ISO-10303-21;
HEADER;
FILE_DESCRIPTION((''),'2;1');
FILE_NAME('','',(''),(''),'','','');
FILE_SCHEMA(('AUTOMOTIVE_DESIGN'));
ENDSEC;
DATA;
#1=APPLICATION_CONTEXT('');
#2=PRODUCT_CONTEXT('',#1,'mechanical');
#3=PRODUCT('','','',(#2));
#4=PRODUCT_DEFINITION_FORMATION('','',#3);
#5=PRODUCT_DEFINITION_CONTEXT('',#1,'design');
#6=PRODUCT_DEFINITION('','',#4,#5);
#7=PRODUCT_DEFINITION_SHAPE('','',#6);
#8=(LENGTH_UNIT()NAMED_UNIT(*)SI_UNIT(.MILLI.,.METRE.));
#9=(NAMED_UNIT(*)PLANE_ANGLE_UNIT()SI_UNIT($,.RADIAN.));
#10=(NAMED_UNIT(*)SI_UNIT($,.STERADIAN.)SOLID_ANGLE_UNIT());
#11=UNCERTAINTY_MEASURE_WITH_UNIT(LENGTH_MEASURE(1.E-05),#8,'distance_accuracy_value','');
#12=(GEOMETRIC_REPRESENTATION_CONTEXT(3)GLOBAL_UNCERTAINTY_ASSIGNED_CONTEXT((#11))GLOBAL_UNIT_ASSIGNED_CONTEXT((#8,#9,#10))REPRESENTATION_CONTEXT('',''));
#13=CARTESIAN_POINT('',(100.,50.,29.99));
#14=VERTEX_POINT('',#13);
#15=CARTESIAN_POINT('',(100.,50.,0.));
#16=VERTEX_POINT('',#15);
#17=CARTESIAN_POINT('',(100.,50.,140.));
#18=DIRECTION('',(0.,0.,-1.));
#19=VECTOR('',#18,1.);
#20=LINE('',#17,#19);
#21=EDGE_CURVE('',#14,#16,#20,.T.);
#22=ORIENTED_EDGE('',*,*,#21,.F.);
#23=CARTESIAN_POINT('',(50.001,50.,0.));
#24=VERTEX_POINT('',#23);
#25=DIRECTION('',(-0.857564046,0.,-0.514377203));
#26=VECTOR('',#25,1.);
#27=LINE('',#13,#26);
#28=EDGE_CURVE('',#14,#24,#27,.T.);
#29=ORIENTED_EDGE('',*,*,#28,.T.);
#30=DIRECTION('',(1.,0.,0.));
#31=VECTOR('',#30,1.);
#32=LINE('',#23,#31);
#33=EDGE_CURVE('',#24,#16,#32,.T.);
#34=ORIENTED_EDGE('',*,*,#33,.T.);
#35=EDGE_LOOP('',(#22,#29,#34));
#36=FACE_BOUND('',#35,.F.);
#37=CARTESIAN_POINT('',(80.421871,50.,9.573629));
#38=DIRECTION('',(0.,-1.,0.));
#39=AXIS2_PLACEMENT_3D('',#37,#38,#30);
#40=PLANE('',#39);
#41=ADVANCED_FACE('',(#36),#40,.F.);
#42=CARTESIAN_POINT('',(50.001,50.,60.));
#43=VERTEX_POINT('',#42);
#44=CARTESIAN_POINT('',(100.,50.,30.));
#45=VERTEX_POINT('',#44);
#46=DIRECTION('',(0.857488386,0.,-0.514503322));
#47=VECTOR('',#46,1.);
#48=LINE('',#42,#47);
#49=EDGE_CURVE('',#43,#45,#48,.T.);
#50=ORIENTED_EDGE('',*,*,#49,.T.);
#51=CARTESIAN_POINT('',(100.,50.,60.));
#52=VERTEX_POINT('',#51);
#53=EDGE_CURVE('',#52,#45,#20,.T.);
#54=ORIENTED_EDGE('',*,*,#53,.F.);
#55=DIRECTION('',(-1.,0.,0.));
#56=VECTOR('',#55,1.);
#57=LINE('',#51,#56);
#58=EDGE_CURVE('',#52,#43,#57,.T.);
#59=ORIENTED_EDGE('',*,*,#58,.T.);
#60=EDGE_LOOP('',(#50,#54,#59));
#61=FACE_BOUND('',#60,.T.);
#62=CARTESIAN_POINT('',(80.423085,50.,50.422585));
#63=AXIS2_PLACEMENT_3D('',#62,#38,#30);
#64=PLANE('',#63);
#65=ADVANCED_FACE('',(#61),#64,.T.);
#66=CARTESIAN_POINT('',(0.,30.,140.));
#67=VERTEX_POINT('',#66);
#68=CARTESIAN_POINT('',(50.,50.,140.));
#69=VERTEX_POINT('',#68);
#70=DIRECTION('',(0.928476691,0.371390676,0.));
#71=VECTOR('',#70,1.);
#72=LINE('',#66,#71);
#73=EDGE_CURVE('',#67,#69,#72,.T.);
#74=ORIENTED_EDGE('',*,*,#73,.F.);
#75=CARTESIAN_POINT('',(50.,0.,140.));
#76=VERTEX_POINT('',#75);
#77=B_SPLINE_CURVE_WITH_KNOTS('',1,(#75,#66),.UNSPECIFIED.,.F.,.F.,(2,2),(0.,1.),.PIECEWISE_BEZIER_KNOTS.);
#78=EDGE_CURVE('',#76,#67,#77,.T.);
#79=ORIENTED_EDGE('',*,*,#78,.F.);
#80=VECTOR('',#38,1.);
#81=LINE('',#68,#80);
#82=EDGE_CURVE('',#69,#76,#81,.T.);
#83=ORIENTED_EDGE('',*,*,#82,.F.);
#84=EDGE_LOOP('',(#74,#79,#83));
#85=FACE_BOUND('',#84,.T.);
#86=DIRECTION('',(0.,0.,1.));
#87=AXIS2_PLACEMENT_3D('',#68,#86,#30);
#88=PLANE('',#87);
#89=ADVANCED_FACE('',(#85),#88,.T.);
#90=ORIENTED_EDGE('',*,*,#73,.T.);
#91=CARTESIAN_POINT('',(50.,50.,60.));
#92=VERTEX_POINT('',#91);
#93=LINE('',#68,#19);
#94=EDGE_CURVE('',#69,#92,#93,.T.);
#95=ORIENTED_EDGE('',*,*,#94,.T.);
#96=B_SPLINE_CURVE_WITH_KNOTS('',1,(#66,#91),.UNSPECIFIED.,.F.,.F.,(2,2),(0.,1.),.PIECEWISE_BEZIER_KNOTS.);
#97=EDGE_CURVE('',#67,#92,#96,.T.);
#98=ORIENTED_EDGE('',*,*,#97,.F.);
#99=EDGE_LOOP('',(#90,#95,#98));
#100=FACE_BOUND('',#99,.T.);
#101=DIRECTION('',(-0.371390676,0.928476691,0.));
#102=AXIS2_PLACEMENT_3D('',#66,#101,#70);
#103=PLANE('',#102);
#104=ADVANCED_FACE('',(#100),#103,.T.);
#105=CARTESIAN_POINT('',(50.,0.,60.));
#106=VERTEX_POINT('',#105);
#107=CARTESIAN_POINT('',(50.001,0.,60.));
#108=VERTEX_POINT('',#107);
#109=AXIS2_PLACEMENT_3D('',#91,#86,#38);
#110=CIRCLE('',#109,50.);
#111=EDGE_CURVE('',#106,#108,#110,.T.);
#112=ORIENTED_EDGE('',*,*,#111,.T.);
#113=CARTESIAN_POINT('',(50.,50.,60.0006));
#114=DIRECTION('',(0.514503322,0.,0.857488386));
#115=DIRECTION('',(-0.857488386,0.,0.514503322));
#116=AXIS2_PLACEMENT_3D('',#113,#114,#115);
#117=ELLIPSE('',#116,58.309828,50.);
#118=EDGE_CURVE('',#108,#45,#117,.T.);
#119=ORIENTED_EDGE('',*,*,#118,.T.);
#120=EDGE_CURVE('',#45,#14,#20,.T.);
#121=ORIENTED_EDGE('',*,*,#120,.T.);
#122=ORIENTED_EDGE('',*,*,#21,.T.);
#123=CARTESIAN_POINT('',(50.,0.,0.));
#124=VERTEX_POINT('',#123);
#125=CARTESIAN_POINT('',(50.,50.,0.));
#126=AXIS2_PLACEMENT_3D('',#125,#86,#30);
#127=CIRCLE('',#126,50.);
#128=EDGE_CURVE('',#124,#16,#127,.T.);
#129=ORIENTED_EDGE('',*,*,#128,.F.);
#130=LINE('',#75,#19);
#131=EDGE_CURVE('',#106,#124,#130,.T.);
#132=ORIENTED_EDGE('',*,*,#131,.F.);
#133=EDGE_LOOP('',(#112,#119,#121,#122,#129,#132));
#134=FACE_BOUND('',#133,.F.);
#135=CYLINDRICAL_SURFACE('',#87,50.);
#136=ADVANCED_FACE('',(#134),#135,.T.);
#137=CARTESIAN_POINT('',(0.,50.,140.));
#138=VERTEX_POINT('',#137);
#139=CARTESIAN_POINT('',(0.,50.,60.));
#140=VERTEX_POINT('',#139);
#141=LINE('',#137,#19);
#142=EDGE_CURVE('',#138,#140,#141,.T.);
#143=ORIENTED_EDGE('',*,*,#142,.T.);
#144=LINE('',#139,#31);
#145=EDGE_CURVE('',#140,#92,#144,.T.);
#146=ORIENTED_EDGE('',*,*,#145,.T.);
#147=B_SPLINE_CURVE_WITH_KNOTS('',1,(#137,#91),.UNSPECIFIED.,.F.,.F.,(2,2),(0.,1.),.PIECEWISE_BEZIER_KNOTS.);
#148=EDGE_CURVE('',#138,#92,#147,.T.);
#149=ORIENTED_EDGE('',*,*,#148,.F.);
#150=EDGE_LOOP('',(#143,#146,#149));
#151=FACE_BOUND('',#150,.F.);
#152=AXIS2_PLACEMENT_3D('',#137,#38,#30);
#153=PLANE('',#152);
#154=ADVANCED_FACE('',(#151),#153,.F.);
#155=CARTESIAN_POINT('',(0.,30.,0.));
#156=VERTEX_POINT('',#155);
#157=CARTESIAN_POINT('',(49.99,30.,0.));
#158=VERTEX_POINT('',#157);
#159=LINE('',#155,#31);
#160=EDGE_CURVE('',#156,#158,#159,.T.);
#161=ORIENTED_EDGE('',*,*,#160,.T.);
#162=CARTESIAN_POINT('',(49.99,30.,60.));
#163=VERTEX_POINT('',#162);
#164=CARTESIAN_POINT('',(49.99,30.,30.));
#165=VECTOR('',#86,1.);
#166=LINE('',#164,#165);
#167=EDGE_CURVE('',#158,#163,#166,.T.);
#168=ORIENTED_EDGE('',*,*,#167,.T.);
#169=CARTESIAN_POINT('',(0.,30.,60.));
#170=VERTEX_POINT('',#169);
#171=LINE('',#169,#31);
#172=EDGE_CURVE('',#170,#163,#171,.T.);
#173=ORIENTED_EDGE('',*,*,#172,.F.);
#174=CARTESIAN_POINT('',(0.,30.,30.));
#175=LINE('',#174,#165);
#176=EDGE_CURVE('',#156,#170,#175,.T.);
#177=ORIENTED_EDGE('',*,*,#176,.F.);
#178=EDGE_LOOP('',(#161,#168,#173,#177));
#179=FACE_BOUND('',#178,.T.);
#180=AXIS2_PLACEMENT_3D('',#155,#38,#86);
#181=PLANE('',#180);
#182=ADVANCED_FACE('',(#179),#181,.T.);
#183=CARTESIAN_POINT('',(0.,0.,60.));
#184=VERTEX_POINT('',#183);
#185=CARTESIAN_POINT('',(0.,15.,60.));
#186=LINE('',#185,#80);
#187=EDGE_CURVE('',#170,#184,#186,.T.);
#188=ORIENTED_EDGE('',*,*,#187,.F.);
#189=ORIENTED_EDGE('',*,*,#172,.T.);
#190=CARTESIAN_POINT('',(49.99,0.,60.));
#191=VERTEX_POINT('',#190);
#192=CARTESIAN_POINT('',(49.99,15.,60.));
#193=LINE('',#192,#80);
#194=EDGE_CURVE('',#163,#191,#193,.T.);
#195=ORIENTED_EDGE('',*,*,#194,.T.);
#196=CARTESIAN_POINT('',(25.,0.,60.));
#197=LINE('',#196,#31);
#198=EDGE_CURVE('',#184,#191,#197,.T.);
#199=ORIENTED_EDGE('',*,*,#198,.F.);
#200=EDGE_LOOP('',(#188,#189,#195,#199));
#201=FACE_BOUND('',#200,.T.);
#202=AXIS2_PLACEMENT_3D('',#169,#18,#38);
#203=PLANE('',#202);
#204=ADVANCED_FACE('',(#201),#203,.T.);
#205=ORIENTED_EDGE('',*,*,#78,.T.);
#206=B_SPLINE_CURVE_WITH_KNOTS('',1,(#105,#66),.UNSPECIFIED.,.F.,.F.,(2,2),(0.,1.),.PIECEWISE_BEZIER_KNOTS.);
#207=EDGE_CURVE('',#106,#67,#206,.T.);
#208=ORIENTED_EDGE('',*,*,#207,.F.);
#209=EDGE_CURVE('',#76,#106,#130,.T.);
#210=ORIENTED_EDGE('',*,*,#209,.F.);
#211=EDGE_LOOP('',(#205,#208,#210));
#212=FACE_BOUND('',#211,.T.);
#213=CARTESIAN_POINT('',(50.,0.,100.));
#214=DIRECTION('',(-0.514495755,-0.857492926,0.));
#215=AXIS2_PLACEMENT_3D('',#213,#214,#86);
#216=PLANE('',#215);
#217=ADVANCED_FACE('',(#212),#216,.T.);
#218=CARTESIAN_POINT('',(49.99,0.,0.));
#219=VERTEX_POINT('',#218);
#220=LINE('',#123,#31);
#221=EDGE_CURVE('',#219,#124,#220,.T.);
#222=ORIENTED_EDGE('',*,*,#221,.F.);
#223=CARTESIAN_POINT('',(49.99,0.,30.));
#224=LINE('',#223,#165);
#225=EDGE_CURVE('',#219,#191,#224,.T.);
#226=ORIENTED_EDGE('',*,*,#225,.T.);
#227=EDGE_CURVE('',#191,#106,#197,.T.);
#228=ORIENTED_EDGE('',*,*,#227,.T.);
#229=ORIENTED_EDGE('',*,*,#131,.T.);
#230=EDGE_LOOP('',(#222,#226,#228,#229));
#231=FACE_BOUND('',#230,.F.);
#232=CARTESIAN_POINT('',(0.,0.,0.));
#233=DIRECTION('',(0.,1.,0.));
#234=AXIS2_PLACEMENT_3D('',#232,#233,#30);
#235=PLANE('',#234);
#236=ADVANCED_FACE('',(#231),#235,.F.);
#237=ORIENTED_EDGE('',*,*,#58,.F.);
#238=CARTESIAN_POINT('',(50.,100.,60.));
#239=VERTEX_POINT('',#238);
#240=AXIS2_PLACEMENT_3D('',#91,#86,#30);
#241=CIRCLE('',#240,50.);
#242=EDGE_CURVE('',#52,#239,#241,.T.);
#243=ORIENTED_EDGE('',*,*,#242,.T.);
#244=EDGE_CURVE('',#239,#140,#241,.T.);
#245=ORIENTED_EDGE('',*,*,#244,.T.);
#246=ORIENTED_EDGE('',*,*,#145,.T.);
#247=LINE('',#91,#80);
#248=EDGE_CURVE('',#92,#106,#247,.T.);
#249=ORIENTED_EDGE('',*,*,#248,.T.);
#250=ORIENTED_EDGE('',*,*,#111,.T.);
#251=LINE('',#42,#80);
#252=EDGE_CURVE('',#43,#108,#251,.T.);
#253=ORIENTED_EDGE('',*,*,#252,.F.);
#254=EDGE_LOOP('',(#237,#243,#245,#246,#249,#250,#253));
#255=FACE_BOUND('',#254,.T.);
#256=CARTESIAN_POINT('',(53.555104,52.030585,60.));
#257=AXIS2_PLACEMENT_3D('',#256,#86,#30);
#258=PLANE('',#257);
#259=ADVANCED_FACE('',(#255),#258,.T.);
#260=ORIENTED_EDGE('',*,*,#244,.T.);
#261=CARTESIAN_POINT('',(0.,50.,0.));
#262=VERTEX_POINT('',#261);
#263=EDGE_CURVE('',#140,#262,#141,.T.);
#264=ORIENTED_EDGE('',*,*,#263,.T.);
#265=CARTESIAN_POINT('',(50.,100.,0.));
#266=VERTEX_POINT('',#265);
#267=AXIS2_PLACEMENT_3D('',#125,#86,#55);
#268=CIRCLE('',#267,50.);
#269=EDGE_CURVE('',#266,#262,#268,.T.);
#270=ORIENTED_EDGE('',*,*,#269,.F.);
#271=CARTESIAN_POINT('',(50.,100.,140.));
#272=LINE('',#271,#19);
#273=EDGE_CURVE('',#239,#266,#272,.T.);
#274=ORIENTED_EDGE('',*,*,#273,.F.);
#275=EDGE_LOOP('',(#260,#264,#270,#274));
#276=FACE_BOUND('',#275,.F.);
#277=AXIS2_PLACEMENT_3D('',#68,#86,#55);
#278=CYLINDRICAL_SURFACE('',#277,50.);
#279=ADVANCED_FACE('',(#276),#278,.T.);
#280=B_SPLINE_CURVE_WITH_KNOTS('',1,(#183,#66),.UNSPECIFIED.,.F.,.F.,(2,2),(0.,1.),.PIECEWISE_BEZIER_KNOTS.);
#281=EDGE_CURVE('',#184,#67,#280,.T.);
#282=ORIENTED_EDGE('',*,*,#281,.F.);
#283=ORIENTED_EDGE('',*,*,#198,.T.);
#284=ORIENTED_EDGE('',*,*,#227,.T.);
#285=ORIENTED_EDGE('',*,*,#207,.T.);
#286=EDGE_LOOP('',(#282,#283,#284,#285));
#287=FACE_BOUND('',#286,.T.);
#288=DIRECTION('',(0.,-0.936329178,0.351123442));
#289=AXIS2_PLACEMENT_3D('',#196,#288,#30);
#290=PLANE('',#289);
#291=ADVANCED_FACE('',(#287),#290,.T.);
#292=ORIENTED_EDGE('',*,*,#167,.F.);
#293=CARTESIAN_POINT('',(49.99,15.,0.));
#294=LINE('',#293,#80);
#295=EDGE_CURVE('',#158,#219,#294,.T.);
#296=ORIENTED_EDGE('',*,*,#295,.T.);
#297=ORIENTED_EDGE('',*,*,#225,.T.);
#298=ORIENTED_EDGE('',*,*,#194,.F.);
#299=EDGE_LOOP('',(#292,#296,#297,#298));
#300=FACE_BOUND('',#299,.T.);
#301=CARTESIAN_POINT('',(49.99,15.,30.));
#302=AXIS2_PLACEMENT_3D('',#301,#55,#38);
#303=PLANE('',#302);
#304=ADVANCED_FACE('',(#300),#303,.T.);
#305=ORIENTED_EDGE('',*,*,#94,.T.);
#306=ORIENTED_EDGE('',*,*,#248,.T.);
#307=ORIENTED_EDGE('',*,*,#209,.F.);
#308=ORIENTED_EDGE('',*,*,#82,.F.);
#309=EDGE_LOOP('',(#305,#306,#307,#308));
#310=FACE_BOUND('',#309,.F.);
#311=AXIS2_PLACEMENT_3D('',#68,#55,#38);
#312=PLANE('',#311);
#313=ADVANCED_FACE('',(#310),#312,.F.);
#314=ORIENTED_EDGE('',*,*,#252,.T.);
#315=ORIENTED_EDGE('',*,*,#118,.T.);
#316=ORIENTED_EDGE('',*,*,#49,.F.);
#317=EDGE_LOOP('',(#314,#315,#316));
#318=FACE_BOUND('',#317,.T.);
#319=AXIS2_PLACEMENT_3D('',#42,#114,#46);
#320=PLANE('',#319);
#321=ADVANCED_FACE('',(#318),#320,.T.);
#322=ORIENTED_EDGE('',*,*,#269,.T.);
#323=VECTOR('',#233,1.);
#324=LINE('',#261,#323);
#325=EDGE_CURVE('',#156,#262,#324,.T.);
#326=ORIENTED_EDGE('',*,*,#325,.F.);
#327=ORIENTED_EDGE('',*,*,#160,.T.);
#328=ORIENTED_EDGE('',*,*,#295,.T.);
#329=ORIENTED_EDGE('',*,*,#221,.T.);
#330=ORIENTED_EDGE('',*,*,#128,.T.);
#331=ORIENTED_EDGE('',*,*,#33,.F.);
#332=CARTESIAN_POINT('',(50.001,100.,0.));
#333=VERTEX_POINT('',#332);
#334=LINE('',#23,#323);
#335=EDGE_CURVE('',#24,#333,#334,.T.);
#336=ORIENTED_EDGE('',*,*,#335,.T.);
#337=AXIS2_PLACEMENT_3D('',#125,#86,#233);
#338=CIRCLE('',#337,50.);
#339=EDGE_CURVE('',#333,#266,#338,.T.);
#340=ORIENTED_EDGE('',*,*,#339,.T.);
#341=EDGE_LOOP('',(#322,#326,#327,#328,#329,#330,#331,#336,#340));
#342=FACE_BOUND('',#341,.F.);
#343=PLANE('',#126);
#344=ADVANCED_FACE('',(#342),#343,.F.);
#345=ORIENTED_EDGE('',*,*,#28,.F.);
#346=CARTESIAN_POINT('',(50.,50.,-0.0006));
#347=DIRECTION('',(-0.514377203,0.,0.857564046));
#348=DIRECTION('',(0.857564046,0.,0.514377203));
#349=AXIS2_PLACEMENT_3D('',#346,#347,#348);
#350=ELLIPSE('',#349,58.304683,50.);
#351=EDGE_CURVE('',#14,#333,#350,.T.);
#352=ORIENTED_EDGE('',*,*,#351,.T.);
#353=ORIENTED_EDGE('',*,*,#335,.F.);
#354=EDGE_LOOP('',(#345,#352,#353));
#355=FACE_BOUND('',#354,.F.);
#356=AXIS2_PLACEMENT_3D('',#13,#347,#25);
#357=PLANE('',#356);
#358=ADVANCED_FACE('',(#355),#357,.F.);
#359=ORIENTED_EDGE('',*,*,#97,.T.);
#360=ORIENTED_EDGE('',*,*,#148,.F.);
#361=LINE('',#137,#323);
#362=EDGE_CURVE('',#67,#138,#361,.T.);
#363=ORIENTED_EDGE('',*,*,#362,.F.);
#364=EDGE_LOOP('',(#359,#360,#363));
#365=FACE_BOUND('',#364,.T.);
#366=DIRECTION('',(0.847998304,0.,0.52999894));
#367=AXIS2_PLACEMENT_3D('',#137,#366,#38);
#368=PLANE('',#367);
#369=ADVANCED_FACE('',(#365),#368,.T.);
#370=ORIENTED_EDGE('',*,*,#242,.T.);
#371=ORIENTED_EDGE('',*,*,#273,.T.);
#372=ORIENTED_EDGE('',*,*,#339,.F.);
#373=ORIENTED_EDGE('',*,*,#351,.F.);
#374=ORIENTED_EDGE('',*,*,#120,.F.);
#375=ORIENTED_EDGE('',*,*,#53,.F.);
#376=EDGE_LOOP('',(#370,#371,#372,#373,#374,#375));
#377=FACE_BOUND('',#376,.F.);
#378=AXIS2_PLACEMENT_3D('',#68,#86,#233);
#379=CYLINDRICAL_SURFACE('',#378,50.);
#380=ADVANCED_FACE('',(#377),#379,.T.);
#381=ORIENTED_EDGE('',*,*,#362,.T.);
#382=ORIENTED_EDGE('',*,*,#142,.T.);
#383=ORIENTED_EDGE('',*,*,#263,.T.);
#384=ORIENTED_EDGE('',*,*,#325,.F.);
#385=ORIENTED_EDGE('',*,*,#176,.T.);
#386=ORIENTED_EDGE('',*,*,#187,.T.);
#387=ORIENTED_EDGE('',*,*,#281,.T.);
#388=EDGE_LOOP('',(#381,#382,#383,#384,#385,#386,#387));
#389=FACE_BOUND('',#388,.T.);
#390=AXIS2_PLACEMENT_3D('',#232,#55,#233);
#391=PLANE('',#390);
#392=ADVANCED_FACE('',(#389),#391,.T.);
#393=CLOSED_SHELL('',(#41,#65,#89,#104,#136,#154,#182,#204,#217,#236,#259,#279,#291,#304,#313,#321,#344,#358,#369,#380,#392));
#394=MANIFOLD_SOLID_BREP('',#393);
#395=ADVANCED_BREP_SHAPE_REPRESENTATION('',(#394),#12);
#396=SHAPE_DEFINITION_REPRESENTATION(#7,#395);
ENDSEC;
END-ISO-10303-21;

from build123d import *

# Parameters (mm, degrees)
F0_W      = 100
F0_H      = 100
F1_DEPTH  = 140
F3_DEPTH  = 140.001
F5_DEPTH  = 80
F9_DEPTH  = 50.00099999
F11_DEPTH = 50.00099999
F6_W      = 50
F6_H      = 80
F14_W     = 30
F14_H     = 60
F16_DEPTH = 49.99


with BuildPart() as f1:
    # F0 (on Top) → F1 (new body)
    with BuildSketch(Plane.XY):
        with Locations((50, 50)):
            Rectangle(F0_W, F0_H)
    extrude(amount=F1_DEPTH)

    # F2 (on face) → F3 (cut, through all)
    with BuildSketch(Plane.XY.offset(140)):
        with BuildLine():
            ThreePointArc((0, 50), (14.6446609407, 85.3553390593), (50, 100))
            Line((50, 100), (0, 100))
            Line((0, 100), (0, 50))
        make_face()
        with BuildLine():
            ThreePointArc((50, 100), (85.3553390593, 85.3553390593), (100, 50))
            Line((100, 50), (100, 100))
            Line((100, 100), (50, 100))
        make_face()
        with BuildLine():
            Line((100, 0), (100, 50))
            ThreePointArc((100, 50), (85.3553390593, 14.6446609407), (50, 0))
            Line((50, 0), (100, 0))
        make_face()
    extrude(amount=-F3_DEPTH, mode=Mode.SUBTRACT)

    # F4 (on face) → F5 (cut)
    with BuildSketch(Plane.XY.offset(140)):
        with BuildLine():
            ThreePointArc((100, 50), (50, 100), (0, 50))
            Line((0, 50), (50, 50))
            Line((50, 50), (50, 0))
            ThreePointArc((50, 0), (85.3553390593, 14.6446609407), (100, 50))
        make_face()
    extrude(amount=-F5_DEPTH, mode=Mode.SUBTRACT)

    # F8 (on face) → F9 (cut, through all)
    with BuildSketch(Plane.XZ.offset(-50)):
        Polygon((100, 60), (50.001, 60), (100, 30), align=None)
    extrude(amount=F9_DEPTH, mode=Mode.SUBTRACT)

    # F10 (on face) → F11 (cut, through all)
    with BuildSketch(Plane.XZ.offset(-50)):
        Polygon((50.001, 0), (100, 0), (100, 29.99), align=None)
    extrude(amount=-F11_DEPTH, mode=Mode.SUBTRACT)

    # F6 (on face) → F13 section 0
    with BuildSketch(Plane.XZ, mode=Mode.PRIVATE) as f13_s0:
        with Locations((25, 100)):
            Rectangle(F6_W, F6_H)
    loft([f13_s0.sketch, Vertex(0, 30, 140)], mode=Mode.SUBTRACT)

    # F14 (on face) → F16 (cut)
    with BuildSketch(Plane(origin=(0, 0, 0), x_dir=(0, -1, 0), z_dir=(-1, 0, 0))):
        with Locations((-15, 30)):
            Rectangle(F14_W, F14_H)
    extrude(amount=-F16_DEPTH, mode=Mode.SUBTRACT)

    # F17 (on face) → F18 section 0
    with BuildSketch(Plane.XY.offset(140), mode=Mode.PRIVATE) as f18_s0:
        Polygon((0, 50), (0, 30), (50, 50), align=None)
    loft([f18_s0.sketch, Vertex(50, 50, 60)], mode=Mode.SUBTRACT)


solid = f1.part
